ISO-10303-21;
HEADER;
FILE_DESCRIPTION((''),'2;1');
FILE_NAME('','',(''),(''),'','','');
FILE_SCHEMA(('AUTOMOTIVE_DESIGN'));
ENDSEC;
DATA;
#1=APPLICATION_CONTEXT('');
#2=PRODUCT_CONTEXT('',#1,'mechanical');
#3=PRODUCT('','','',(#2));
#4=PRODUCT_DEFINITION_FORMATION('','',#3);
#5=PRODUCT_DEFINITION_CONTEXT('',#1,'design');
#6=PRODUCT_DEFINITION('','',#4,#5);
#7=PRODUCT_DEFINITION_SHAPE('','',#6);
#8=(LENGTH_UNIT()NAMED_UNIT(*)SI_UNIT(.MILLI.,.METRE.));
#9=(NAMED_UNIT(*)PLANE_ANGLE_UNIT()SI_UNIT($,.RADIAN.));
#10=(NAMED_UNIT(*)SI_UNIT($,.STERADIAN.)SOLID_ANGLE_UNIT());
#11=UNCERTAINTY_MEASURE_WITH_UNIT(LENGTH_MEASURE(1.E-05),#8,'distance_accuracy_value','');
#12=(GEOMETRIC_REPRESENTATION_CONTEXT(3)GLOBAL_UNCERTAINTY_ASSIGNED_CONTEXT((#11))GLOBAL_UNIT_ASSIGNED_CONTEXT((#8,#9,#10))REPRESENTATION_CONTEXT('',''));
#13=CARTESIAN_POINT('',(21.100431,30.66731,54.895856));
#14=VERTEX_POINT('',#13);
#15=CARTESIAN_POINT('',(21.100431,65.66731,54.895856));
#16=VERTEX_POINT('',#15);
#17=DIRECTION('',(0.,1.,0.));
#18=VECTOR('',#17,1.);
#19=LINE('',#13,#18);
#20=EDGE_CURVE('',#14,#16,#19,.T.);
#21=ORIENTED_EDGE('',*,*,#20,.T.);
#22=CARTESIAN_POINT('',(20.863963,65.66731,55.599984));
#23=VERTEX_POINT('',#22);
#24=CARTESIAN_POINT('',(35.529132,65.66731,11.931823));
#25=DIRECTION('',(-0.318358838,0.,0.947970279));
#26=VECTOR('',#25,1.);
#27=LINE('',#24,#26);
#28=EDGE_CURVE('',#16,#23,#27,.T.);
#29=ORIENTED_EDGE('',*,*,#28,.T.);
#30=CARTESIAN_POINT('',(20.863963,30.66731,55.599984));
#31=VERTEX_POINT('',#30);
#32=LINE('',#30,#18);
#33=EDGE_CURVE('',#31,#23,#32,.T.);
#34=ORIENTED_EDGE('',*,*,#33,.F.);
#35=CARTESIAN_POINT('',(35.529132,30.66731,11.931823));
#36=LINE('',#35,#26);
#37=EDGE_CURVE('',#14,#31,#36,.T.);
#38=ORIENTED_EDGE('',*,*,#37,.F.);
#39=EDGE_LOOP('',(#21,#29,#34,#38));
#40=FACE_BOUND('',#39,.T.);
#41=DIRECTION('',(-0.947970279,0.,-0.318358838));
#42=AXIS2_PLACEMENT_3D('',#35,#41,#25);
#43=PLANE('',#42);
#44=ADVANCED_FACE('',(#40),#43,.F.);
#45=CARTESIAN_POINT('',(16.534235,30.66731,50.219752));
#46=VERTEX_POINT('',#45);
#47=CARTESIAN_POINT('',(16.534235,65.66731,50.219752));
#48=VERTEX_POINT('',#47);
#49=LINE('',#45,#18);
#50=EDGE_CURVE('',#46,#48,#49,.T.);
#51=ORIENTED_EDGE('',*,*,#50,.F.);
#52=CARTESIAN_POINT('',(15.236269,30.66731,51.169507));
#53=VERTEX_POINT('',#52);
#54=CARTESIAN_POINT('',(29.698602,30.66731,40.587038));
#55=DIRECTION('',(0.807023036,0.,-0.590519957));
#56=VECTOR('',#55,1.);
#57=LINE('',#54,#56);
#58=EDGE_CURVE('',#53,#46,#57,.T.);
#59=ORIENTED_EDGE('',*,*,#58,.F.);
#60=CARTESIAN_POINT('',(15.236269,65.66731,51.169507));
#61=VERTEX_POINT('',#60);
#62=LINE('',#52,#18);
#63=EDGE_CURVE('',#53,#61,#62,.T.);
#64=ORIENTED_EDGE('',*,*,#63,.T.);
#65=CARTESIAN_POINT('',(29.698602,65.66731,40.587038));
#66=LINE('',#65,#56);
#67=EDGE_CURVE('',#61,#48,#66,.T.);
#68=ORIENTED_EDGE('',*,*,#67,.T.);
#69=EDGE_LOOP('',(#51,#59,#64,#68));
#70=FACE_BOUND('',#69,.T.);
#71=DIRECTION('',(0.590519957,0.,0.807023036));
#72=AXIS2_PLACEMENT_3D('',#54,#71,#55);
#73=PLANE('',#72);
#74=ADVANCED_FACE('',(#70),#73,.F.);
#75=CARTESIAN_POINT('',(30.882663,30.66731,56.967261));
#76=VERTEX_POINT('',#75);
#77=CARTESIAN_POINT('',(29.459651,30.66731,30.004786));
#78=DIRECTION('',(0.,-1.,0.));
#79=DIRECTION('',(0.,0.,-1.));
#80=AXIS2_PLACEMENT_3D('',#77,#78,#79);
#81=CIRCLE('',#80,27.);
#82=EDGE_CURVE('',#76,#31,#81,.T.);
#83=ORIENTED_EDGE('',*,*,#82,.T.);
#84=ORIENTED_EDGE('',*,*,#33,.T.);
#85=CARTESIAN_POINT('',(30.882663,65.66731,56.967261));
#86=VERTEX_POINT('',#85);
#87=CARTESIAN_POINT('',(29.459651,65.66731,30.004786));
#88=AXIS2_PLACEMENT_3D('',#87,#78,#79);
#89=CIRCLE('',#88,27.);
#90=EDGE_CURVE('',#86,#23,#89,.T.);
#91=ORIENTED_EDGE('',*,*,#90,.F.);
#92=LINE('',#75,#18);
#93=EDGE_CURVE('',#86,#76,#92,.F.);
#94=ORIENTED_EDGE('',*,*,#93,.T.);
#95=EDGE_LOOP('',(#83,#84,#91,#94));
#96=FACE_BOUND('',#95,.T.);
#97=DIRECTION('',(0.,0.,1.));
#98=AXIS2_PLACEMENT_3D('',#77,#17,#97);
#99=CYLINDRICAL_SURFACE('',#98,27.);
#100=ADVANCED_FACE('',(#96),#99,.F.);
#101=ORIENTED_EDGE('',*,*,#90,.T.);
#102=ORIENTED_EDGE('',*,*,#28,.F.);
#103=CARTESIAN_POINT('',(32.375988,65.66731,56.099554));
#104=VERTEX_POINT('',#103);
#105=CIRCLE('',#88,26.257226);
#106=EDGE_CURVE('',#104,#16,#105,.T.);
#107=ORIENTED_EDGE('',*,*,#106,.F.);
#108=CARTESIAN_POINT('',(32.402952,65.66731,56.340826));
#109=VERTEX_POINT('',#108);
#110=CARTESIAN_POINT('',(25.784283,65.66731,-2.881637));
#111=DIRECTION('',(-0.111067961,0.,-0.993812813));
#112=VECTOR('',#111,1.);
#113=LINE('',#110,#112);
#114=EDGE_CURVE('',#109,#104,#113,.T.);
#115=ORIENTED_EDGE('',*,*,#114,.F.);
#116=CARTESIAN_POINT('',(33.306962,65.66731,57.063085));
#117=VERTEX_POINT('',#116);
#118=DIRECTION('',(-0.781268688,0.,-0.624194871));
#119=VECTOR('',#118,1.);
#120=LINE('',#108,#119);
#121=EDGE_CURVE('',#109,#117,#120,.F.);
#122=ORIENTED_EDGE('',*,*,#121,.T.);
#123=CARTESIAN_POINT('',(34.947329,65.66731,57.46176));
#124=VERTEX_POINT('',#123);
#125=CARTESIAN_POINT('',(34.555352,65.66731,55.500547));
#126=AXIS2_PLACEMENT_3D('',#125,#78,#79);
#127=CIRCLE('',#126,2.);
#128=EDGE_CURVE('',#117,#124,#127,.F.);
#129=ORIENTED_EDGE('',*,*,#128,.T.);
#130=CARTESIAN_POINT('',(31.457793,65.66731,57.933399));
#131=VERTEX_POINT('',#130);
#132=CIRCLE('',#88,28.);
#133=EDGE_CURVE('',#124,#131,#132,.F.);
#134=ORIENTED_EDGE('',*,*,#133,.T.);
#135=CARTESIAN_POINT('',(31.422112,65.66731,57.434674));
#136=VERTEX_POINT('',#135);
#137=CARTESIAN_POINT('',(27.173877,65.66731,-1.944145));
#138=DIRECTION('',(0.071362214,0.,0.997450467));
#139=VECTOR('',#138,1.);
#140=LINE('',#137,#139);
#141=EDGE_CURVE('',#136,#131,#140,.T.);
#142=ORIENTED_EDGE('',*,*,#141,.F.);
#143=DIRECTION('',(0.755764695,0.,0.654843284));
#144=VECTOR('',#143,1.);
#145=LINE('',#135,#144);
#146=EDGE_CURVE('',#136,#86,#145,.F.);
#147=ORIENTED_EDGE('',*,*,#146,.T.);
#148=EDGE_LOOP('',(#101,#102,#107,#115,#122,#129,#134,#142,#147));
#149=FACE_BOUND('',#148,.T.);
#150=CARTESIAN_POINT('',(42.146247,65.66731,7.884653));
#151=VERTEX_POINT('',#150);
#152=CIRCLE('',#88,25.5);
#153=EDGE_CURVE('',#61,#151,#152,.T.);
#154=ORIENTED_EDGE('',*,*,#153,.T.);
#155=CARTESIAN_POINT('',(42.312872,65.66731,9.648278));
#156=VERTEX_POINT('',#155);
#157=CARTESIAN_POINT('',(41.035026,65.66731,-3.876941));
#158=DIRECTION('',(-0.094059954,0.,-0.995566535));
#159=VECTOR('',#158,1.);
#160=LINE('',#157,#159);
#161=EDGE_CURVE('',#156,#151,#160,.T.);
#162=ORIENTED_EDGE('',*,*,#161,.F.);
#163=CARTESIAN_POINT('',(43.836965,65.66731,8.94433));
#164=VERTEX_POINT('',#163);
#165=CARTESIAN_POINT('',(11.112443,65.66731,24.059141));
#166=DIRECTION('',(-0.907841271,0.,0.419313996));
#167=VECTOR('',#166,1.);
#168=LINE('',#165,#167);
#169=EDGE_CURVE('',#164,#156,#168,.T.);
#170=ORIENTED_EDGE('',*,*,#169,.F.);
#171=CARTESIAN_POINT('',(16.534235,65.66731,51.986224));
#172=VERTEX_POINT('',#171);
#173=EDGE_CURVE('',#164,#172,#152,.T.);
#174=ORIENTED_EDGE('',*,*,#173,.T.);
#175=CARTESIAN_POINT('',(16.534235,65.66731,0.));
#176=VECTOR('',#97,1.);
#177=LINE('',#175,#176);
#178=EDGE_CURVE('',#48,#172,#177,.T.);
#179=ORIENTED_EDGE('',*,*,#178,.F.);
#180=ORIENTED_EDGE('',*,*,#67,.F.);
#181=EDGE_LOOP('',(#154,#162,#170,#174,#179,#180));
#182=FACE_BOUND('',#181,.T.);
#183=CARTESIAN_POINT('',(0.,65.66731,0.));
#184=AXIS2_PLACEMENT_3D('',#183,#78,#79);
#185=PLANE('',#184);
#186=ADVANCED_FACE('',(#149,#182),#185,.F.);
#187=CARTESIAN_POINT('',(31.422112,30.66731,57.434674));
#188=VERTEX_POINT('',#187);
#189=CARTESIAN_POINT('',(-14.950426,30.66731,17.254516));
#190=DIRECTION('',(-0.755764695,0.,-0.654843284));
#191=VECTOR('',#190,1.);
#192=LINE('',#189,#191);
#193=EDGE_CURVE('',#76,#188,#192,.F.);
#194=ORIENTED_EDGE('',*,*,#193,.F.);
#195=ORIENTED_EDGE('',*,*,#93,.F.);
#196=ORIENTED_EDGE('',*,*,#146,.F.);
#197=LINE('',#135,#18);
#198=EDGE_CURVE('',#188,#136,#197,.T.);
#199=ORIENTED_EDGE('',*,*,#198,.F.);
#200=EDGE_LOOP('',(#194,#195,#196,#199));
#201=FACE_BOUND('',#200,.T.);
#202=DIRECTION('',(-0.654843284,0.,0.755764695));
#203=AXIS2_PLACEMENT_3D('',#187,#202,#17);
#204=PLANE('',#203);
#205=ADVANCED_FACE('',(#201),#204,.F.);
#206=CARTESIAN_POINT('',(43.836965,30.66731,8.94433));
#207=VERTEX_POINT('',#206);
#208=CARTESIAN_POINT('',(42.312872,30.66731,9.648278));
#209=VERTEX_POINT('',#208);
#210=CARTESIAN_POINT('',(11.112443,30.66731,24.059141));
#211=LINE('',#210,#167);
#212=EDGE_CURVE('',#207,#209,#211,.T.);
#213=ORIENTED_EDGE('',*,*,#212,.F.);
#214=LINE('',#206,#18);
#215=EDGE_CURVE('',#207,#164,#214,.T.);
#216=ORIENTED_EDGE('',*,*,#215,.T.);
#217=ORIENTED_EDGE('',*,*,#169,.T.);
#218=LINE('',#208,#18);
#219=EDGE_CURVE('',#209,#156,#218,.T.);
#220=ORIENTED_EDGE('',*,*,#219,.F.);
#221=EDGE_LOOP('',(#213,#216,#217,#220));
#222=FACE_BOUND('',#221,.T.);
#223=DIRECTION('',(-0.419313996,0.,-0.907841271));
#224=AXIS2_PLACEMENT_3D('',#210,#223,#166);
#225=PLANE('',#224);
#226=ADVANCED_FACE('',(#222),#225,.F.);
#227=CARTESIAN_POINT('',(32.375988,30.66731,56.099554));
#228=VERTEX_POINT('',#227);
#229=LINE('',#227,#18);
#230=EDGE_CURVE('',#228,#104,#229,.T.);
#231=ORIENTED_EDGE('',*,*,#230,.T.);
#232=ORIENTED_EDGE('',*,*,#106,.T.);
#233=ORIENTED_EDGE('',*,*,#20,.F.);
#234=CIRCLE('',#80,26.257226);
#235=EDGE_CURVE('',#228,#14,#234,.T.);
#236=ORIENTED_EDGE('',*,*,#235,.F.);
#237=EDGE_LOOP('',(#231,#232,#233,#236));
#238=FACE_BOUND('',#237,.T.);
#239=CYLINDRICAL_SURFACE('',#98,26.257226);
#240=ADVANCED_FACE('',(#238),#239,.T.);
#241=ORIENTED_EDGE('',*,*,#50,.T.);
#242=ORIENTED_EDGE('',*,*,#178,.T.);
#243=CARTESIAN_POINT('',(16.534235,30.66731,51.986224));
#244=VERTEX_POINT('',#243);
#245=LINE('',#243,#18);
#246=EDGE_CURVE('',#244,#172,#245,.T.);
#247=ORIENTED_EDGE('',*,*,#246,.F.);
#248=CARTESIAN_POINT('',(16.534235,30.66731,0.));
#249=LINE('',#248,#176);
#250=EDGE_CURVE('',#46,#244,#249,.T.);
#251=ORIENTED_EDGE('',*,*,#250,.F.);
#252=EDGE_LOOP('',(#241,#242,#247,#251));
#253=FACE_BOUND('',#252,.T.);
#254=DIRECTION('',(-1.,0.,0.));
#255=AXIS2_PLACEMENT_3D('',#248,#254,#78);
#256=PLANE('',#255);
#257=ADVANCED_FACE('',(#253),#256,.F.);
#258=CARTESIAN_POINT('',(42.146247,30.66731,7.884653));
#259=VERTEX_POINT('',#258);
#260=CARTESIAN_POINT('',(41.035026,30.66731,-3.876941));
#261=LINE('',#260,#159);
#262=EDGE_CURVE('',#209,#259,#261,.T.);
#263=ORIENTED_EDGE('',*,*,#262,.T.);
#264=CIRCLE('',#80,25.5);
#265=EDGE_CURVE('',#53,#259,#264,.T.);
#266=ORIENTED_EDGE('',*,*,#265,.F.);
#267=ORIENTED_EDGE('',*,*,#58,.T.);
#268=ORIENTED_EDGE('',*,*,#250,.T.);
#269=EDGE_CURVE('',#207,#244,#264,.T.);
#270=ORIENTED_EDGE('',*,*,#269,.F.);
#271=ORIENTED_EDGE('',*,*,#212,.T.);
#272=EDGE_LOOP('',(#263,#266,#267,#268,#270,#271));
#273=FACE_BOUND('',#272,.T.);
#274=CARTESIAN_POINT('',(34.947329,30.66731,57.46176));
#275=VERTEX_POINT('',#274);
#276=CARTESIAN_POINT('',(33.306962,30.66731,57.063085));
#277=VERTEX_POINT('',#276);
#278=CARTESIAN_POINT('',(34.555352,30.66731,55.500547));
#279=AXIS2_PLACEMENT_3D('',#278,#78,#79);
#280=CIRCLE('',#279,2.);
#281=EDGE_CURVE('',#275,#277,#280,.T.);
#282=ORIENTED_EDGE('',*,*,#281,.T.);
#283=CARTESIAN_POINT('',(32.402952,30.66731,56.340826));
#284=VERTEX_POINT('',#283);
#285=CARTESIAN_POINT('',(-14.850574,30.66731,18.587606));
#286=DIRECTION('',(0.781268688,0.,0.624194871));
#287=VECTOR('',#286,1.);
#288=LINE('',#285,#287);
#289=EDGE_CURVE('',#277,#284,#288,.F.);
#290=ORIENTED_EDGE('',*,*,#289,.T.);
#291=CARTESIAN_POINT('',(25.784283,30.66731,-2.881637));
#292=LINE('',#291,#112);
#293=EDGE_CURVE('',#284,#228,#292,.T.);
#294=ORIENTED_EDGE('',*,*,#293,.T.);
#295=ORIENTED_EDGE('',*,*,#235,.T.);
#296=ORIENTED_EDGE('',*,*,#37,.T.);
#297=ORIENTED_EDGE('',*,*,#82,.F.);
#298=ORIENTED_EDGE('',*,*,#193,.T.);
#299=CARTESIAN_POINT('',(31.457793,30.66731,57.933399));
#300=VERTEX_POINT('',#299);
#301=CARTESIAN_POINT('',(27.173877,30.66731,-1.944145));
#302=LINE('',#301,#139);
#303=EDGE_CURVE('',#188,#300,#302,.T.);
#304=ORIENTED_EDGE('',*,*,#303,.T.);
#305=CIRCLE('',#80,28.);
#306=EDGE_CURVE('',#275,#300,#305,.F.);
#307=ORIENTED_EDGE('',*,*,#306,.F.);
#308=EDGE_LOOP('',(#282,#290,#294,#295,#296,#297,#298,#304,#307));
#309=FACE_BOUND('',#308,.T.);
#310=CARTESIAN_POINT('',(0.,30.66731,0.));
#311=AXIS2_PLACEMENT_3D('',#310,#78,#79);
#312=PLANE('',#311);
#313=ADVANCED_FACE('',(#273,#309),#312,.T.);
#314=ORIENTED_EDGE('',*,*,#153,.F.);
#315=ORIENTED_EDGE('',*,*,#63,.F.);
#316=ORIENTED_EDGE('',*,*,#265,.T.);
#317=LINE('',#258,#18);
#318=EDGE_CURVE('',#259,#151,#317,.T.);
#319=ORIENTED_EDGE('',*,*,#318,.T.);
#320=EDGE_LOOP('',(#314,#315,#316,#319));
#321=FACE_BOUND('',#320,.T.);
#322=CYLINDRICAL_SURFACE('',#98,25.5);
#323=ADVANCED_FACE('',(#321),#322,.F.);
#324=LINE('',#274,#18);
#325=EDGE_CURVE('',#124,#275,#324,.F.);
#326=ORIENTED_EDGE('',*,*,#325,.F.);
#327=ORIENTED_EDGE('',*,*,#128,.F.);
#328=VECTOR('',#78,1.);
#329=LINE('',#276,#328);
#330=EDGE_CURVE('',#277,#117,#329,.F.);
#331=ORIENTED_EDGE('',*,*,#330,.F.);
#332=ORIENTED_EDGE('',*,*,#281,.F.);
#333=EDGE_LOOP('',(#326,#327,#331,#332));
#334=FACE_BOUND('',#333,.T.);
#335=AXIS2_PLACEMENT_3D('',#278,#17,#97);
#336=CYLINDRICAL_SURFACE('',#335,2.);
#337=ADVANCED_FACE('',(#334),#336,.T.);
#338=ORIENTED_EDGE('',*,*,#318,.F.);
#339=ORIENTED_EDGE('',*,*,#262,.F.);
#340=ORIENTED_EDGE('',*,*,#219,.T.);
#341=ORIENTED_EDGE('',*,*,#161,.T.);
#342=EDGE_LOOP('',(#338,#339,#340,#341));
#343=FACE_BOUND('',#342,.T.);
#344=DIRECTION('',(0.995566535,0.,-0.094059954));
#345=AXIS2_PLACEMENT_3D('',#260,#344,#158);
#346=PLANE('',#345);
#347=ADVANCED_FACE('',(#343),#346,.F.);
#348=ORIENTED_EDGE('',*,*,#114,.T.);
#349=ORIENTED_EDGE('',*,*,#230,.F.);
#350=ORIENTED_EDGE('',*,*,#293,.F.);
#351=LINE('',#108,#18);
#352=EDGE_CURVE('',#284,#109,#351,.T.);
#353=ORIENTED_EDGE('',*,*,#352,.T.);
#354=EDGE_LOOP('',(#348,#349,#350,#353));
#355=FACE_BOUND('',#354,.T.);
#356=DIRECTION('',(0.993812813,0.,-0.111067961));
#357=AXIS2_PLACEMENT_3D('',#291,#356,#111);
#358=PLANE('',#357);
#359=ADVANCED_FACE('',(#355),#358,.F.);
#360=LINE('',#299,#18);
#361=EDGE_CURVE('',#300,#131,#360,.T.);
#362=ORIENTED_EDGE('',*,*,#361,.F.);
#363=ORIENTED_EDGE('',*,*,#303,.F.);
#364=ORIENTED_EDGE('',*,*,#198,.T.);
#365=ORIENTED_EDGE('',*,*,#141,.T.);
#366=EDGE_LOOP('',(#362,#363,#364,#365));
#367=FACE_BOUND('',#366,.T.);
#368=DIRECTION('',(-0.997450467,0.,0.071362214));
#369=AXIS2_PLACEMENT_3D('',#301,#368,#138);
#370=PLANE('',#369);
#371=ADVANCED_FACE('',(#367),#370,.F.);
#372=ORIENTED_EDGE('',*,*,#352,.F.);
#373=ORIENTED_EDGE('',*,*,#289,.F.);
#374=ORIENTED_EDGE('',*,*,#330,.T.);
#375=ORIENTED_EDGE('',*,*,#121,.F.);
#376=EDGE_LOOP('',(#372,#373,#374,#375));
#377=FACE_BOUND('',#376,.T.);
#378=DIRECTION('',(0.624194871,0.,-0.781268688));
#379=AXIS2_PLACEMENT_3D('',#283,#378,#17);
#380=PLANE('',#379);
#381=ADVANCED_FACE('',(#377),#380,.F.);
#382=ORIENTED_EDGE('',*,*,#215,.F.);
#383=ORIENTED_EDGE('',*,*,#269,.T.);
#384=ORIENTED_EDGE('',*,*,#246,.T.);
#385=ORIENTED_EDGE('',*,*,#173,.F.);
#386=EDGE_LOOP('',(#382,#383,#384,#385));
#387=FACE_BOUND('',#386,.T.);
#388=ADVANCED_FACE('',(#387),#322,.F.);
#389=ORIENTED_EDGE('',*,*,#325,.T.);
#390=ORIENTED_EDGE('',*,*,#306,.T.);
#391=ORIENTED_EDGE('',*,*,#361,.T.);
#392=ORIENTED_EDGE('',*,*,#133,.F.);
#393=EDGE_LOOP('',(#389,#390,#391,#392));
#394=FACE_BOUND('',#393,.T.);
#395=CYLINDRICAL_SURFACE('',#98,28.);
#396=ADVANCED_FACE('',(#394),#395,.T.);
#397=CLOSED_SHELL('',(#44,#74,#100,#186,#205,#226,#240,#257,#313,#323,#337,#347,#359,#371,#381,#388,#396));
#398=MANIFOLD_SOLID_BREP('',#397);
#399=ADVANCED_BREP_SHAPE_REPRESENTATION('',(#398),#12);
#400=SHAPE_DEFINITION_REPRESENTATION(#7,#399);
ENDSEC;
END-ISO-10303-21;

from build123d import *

# Parameters (mm, degrees)
SKETCH_1_R      = 25.5
EXTRUDE_1_DEPTH = 35
CHAMFER_1_SIZE  = 1.5
FILLET_1_R      = 2
CHAMFER_2_SIZE  = 0.5


with BuildPart() as part:
    # Эскиз1 → Бобышка-Вытянуть1 (new body)
    # profile 1 of 3: a face of its own
    with BuildSketch(Plane(origin=(0, 65.667309681, 0), x_dir=(-1, 0, 0), z_dir=(0, -1, 0))):
        with BuildLine():
            ThreePointArc((-32.569554052, -57.83154498), (-26.905120992, -2.121558707), (-31.457793139, -57.933399285))
            Line((-31.457793139, -57.933399285), (-31.386430924, -56.935948818))
            ThreePointArc((-31.386430924, -56.935948818), (-26.058947255, -56.789767316), (-20.863962526, -55.599983748))
            Line((-20.863962526, -55.599983748), (-21.100431285, -54.895855797))
            ThreePointArc((-21.100431285, -54.895855797), (-26.672454195, -56.113662764), (-32.375987665, -56.099553559))
            Line((-32.375987665, -56.099553559), (-32.569554052, -57.83154498))
        make_face()
        with Locations((-29.45965114, -30.004786206)):
            Circle(SKETCH_1_R, mode=Mode.SUBTRACT)
    # profile 2 of 3: a face of its own
    with BuildSketch(Plane(origin=(0, 65.667309681, 0), x_dir=(-1, 0, 0), z_dir=(0, -1, 0))):
        with BuildLine():
            ThreePointArc((-42.146247167, -7.884653267), (-43.001975074, -8.397947879), (-43.836965332, -8.944329501))
            Line((-43.836965332, -8.944329501), (-42.312872357, -9.648278017))
            Line((-42.312872357, -9.648278017), (-42.146247167, -7.884653267))
        make_face()
    # profile 3 of 3: a face of its own
    with BuildSketch(Plane(origin=(0, 65.667309681, 0), x_dir=(-1, 0, 0), z_dir=(0, -1, 0))):
        with BuildLine():
            Line((-16.534234919, -50.219751552), (-16.534234919, -51.986224182))
            ThreePointArc((-16.534234919, -51.986224182), (-15.879111186, -51.587625096), (-15.236269322, -51.169507079))
            Line((-15.236269322, -51.169507079), (-16.534234919, -50.219751552))
        make_face()
    extrude(amount=EXTRUDE_1_DEPTH)

    # Фаска1
    # the kernel refuses this chamfer: 1.5 mm, written as the material it takes off along each edge
    with BuildSketch(Plane(origin=(32.569554052, 69.524834163, 57.83154498), x_dir=(0.9905736381961588, 0, -0.13698126627690838), z_dir=(0, -1, 0))) as chamfer_1_piece_1:
        with BuildLine():
            Line((1.462313623, 0), (CHAMFER_1_SIZE * 0.0261127432615, -CHAMFER_1_SIZE * 0.999659004181))
            Line((CHAMFER_1_SIZE * 0.0261127432615, -CHAMFER_1_SIZE * 0.999659004181), (0, 0))
            ThreePointArc((0, 0), (0.751799837, 0.009540273), (1.462313623, 0))
        make_face()
    extrude(amount=42.715048964, mode=Mode.SUBTRACT)

    # Скругление1
    fillet_1_edges = [part.edges().sort_by_distance(p)[0] for p in [
        (34.018083377, 48.167309681, 57.631235408),
    ]]
    fillet(fillet_1_edges, radius=FILLET_1_R)

    # Фаска2
    # the kernel refuses this chamfer: 0.5 mm, written as the material it takes off along each edge
    with BuildSketch(Plane(origin=(31.386430924, 66.965316212, 56.935948818), x_dir=(0.0713622142429535, 0, 0.9974504671302444), z_dir=(0, -1, 0))) as chamfer_2_piece_1:
        with BuildLine():
            Line((CHAMFER_2_SIZE, 0), (-0.004717821, 0.504717821))
            ThreePointArc((-0.004717821, 0.504717821), (-0.001247153, 0.259508631), (0, 0))
            Line((0, 0), (CHAMFER_2_SIZE, 0))
        make_face()
    extrude(amount=37.596013061, mode=Mode.SUBTRACT)


solid = part.part
